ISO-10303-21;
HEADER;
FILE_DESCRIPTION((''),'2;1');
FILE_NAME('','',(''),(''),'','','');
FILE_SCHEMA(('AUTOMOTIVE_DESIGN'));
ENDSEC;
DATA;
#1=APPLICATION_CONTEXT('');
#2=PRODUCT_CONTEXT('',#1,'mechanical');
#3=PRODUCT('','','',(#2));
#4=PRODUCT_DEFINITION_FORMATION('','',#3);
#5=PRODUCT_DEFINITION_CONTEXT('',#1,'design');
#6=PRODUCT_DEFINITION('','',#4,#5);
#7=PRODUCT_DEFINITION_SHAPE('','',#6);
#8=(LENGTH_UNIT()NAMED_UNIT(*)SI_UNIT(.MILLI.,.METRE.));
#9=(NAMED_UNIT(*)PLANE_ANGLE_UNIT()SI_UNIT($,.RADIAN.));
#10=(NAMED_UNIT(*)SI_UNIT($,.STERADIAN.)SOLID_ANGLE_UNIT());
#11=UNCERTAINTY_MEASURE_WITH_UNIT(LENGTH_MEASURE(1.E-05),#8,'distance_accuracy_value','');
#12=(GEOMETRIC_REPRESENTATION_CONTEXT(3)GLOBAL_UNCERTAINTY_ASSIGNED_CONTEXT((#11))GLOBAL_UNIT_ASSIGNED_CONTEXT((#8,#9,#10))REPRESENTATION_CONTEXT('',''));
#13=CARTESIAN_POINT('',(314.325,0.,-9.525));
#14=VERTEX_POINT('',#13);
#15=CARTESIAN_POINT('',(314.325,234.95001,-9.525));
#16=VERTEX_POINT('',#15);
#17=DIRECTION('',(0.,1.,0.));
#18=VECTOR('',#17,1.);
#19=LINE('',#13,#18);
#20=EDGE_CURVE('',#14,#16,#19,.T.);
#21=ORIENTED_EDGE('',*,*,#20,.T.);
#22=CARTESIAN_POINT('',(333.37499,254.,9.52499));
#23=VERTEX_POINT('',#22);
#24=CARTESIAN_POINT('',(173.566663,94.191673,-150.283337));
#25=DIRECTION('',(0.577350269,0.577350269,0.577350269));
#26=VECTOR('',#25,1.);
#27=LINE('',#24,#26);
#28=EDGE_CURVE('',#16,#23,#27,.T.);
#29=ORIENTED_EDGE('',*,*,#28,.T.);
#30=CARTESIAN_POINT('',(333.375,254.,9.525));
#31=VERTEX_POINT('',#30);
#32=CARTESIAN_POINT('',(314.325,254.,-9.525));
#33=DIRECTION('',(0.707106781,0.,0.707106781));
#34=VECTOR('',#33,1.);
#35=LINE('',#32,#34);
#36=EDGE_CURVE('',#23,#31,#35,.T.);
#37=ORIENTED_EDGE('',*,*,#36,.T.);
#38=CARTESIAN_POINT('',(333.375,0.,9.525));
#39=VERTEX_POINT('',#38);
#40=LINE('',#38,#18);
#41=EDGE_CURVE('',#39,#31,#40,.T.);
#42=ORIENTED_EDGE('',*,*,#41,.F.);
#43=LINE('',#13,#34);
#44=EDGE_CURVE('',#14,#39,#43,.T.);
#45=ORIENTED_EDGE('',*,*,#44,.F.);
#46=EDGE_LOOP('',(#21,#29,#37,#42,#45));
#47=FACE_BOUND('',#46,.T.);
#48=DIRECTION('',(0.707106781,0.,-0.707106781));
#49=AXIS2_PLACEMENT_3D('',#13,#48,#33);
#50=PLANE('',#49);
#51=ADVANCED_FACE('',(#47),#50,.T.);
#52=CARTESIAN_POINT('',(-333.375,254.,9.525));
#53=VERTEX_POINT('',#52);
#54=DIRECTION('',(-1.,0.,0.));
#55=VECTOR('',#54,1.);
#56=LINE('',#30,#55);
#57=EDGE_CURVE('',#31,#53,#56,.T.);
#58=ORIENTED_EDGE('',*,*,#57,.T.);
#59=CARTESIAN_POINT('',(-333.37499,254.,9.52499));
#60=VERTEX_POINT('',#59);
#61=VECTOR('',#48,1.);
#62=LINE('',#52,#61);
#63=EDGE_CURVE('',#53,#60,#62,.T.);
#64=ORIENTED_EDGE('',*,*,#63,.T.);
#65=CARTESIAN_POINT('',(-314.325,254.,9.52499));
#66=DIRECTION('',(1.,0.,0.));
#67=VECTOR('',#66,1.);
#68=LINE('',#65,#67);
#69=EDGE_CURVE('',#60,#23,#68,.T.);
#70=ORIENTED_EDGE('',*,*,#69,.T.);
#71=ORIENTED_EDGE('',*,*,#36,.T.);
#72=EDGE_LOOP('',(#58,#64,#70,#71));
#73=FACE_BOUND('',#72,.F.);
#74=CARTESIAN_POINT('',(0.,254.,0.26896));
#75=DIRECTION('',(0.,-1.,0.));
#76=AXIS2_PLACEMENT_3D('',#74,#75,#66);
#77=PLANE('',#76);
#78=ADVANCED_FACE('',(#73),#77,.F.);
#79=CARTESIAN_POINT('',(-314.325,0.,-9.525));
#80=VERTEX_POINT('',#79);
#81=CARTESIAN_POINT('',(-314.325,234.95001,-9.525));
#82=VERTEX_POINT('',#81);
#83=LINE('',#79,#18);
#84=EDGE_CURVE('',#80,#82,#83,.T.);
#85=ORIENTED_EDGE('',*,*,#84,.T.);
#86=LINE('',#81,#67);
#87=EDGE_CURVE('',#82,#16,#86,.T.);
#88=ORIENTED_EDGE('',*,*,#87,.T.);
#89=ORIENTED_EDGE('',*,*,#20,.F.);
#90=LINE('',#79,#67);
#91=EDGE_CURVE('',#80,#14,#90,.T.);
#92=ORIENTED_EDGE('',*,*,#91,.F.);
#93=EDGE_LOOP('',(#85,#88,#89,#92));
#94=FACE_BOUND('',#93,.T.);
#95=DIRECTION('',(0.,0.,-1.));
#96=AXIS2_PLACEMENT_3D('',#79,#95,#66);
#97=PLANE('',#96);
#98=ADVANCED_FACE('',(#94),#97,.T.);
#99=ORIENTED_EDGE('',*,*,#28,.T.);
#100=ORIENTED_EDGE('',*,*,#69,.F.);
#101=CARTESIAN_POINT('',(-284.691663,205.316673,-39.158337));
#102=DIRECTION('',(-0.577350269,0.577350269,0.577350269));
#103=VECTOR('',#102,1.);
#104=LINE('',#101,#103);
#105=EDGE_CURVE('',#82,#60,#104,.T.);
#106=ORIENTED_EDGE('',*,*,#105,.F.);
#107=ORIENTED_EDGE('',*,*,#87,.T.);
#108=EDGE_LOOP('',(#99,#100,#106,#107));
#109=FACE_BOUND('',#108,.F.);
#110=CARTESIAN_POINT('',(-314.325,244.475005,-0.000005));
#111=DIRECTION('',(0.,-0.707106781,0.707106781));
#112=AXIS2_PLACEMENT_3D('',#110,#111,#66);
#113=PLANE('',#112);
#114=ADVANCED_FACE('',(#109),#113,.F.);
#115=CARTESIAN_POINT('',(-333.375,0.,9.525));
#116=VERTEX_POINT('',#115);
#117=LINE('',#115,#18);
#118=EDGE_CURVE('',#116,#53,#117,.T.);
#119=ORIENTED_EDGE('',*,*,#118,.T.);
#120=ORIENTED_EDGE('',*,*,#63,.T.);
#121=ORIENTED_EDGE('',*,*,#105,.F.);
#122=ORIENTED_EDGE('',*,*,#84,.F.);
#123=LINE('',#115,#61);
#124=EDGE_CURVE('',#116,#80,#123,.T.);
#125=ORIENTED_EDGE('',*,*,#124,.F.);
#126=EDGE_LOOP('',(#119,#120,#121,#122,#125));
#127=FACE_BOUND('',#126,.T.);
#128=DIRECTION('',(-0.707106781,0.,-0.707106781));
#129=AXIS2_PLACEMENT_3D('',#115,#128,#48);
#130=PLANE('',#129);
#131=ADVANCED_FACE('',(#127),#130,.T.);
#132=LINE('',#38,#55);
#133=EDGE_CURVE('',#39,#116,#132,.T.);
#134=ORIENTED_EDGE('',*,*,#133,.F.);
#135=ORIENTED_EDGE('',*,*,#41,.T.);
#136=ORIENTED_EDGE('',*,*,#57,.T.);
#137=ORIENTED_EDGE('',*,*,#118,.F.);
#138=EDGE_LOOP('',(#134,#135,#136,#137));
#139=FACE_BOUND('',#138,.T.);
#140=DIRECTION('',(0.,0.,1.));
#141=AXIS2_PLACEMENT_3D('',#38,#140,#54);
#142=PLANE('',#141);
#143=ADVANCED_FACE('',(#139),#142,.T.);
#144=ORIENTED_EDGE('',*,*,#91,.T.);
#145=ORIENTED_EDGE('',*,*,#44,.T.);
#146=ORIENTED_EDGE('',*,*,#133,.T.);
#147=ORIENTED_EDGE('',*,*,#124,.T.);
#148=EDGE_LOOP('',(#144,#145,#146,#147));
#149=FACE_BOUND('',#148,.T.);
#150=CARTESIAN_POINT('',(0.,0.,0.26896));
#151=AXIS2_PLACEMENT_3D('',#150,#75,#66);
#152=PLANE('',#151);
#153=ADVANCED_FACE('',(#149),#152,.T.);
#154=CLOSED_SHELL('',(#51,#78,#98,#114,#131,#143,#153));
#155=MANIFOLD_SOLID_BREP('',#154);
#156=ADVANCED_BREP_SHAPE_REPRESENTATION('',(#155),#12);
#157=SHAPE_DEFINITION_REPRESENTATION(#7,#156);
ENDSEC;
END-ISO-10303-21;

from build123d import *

# Parameters (mm, degrees)
F1_DEPTH = 254
F2_SIZE  = 19.04999


# Not quite as in the source:
# - a fillet or chamfer is up to 0.001 mm smaller than in the source, because OpenCascade refuses the exact size


with BuildPart() as f1:
    # F0 (on Front) → F1 (new body)
    with BuildSketch(Plane.XZ):
        Polygon((333.375, 9.525), (-333.375, 9.525), (-314.325, -9.525), (314.325, -9.525), align=None)
    extrude(amount=-F1_DEPTH)

    # F2 (size 19.05 in the source; OpenCascade refuses exactly that, so slightly less here)
    f2_edges = [f1.edges().sort_by_distance(p)[0] for p in [
        (0, 254, -9.525),
    ]]
    chamfer(f2_edges, length=F2_SIZE)


solid = f1.part
